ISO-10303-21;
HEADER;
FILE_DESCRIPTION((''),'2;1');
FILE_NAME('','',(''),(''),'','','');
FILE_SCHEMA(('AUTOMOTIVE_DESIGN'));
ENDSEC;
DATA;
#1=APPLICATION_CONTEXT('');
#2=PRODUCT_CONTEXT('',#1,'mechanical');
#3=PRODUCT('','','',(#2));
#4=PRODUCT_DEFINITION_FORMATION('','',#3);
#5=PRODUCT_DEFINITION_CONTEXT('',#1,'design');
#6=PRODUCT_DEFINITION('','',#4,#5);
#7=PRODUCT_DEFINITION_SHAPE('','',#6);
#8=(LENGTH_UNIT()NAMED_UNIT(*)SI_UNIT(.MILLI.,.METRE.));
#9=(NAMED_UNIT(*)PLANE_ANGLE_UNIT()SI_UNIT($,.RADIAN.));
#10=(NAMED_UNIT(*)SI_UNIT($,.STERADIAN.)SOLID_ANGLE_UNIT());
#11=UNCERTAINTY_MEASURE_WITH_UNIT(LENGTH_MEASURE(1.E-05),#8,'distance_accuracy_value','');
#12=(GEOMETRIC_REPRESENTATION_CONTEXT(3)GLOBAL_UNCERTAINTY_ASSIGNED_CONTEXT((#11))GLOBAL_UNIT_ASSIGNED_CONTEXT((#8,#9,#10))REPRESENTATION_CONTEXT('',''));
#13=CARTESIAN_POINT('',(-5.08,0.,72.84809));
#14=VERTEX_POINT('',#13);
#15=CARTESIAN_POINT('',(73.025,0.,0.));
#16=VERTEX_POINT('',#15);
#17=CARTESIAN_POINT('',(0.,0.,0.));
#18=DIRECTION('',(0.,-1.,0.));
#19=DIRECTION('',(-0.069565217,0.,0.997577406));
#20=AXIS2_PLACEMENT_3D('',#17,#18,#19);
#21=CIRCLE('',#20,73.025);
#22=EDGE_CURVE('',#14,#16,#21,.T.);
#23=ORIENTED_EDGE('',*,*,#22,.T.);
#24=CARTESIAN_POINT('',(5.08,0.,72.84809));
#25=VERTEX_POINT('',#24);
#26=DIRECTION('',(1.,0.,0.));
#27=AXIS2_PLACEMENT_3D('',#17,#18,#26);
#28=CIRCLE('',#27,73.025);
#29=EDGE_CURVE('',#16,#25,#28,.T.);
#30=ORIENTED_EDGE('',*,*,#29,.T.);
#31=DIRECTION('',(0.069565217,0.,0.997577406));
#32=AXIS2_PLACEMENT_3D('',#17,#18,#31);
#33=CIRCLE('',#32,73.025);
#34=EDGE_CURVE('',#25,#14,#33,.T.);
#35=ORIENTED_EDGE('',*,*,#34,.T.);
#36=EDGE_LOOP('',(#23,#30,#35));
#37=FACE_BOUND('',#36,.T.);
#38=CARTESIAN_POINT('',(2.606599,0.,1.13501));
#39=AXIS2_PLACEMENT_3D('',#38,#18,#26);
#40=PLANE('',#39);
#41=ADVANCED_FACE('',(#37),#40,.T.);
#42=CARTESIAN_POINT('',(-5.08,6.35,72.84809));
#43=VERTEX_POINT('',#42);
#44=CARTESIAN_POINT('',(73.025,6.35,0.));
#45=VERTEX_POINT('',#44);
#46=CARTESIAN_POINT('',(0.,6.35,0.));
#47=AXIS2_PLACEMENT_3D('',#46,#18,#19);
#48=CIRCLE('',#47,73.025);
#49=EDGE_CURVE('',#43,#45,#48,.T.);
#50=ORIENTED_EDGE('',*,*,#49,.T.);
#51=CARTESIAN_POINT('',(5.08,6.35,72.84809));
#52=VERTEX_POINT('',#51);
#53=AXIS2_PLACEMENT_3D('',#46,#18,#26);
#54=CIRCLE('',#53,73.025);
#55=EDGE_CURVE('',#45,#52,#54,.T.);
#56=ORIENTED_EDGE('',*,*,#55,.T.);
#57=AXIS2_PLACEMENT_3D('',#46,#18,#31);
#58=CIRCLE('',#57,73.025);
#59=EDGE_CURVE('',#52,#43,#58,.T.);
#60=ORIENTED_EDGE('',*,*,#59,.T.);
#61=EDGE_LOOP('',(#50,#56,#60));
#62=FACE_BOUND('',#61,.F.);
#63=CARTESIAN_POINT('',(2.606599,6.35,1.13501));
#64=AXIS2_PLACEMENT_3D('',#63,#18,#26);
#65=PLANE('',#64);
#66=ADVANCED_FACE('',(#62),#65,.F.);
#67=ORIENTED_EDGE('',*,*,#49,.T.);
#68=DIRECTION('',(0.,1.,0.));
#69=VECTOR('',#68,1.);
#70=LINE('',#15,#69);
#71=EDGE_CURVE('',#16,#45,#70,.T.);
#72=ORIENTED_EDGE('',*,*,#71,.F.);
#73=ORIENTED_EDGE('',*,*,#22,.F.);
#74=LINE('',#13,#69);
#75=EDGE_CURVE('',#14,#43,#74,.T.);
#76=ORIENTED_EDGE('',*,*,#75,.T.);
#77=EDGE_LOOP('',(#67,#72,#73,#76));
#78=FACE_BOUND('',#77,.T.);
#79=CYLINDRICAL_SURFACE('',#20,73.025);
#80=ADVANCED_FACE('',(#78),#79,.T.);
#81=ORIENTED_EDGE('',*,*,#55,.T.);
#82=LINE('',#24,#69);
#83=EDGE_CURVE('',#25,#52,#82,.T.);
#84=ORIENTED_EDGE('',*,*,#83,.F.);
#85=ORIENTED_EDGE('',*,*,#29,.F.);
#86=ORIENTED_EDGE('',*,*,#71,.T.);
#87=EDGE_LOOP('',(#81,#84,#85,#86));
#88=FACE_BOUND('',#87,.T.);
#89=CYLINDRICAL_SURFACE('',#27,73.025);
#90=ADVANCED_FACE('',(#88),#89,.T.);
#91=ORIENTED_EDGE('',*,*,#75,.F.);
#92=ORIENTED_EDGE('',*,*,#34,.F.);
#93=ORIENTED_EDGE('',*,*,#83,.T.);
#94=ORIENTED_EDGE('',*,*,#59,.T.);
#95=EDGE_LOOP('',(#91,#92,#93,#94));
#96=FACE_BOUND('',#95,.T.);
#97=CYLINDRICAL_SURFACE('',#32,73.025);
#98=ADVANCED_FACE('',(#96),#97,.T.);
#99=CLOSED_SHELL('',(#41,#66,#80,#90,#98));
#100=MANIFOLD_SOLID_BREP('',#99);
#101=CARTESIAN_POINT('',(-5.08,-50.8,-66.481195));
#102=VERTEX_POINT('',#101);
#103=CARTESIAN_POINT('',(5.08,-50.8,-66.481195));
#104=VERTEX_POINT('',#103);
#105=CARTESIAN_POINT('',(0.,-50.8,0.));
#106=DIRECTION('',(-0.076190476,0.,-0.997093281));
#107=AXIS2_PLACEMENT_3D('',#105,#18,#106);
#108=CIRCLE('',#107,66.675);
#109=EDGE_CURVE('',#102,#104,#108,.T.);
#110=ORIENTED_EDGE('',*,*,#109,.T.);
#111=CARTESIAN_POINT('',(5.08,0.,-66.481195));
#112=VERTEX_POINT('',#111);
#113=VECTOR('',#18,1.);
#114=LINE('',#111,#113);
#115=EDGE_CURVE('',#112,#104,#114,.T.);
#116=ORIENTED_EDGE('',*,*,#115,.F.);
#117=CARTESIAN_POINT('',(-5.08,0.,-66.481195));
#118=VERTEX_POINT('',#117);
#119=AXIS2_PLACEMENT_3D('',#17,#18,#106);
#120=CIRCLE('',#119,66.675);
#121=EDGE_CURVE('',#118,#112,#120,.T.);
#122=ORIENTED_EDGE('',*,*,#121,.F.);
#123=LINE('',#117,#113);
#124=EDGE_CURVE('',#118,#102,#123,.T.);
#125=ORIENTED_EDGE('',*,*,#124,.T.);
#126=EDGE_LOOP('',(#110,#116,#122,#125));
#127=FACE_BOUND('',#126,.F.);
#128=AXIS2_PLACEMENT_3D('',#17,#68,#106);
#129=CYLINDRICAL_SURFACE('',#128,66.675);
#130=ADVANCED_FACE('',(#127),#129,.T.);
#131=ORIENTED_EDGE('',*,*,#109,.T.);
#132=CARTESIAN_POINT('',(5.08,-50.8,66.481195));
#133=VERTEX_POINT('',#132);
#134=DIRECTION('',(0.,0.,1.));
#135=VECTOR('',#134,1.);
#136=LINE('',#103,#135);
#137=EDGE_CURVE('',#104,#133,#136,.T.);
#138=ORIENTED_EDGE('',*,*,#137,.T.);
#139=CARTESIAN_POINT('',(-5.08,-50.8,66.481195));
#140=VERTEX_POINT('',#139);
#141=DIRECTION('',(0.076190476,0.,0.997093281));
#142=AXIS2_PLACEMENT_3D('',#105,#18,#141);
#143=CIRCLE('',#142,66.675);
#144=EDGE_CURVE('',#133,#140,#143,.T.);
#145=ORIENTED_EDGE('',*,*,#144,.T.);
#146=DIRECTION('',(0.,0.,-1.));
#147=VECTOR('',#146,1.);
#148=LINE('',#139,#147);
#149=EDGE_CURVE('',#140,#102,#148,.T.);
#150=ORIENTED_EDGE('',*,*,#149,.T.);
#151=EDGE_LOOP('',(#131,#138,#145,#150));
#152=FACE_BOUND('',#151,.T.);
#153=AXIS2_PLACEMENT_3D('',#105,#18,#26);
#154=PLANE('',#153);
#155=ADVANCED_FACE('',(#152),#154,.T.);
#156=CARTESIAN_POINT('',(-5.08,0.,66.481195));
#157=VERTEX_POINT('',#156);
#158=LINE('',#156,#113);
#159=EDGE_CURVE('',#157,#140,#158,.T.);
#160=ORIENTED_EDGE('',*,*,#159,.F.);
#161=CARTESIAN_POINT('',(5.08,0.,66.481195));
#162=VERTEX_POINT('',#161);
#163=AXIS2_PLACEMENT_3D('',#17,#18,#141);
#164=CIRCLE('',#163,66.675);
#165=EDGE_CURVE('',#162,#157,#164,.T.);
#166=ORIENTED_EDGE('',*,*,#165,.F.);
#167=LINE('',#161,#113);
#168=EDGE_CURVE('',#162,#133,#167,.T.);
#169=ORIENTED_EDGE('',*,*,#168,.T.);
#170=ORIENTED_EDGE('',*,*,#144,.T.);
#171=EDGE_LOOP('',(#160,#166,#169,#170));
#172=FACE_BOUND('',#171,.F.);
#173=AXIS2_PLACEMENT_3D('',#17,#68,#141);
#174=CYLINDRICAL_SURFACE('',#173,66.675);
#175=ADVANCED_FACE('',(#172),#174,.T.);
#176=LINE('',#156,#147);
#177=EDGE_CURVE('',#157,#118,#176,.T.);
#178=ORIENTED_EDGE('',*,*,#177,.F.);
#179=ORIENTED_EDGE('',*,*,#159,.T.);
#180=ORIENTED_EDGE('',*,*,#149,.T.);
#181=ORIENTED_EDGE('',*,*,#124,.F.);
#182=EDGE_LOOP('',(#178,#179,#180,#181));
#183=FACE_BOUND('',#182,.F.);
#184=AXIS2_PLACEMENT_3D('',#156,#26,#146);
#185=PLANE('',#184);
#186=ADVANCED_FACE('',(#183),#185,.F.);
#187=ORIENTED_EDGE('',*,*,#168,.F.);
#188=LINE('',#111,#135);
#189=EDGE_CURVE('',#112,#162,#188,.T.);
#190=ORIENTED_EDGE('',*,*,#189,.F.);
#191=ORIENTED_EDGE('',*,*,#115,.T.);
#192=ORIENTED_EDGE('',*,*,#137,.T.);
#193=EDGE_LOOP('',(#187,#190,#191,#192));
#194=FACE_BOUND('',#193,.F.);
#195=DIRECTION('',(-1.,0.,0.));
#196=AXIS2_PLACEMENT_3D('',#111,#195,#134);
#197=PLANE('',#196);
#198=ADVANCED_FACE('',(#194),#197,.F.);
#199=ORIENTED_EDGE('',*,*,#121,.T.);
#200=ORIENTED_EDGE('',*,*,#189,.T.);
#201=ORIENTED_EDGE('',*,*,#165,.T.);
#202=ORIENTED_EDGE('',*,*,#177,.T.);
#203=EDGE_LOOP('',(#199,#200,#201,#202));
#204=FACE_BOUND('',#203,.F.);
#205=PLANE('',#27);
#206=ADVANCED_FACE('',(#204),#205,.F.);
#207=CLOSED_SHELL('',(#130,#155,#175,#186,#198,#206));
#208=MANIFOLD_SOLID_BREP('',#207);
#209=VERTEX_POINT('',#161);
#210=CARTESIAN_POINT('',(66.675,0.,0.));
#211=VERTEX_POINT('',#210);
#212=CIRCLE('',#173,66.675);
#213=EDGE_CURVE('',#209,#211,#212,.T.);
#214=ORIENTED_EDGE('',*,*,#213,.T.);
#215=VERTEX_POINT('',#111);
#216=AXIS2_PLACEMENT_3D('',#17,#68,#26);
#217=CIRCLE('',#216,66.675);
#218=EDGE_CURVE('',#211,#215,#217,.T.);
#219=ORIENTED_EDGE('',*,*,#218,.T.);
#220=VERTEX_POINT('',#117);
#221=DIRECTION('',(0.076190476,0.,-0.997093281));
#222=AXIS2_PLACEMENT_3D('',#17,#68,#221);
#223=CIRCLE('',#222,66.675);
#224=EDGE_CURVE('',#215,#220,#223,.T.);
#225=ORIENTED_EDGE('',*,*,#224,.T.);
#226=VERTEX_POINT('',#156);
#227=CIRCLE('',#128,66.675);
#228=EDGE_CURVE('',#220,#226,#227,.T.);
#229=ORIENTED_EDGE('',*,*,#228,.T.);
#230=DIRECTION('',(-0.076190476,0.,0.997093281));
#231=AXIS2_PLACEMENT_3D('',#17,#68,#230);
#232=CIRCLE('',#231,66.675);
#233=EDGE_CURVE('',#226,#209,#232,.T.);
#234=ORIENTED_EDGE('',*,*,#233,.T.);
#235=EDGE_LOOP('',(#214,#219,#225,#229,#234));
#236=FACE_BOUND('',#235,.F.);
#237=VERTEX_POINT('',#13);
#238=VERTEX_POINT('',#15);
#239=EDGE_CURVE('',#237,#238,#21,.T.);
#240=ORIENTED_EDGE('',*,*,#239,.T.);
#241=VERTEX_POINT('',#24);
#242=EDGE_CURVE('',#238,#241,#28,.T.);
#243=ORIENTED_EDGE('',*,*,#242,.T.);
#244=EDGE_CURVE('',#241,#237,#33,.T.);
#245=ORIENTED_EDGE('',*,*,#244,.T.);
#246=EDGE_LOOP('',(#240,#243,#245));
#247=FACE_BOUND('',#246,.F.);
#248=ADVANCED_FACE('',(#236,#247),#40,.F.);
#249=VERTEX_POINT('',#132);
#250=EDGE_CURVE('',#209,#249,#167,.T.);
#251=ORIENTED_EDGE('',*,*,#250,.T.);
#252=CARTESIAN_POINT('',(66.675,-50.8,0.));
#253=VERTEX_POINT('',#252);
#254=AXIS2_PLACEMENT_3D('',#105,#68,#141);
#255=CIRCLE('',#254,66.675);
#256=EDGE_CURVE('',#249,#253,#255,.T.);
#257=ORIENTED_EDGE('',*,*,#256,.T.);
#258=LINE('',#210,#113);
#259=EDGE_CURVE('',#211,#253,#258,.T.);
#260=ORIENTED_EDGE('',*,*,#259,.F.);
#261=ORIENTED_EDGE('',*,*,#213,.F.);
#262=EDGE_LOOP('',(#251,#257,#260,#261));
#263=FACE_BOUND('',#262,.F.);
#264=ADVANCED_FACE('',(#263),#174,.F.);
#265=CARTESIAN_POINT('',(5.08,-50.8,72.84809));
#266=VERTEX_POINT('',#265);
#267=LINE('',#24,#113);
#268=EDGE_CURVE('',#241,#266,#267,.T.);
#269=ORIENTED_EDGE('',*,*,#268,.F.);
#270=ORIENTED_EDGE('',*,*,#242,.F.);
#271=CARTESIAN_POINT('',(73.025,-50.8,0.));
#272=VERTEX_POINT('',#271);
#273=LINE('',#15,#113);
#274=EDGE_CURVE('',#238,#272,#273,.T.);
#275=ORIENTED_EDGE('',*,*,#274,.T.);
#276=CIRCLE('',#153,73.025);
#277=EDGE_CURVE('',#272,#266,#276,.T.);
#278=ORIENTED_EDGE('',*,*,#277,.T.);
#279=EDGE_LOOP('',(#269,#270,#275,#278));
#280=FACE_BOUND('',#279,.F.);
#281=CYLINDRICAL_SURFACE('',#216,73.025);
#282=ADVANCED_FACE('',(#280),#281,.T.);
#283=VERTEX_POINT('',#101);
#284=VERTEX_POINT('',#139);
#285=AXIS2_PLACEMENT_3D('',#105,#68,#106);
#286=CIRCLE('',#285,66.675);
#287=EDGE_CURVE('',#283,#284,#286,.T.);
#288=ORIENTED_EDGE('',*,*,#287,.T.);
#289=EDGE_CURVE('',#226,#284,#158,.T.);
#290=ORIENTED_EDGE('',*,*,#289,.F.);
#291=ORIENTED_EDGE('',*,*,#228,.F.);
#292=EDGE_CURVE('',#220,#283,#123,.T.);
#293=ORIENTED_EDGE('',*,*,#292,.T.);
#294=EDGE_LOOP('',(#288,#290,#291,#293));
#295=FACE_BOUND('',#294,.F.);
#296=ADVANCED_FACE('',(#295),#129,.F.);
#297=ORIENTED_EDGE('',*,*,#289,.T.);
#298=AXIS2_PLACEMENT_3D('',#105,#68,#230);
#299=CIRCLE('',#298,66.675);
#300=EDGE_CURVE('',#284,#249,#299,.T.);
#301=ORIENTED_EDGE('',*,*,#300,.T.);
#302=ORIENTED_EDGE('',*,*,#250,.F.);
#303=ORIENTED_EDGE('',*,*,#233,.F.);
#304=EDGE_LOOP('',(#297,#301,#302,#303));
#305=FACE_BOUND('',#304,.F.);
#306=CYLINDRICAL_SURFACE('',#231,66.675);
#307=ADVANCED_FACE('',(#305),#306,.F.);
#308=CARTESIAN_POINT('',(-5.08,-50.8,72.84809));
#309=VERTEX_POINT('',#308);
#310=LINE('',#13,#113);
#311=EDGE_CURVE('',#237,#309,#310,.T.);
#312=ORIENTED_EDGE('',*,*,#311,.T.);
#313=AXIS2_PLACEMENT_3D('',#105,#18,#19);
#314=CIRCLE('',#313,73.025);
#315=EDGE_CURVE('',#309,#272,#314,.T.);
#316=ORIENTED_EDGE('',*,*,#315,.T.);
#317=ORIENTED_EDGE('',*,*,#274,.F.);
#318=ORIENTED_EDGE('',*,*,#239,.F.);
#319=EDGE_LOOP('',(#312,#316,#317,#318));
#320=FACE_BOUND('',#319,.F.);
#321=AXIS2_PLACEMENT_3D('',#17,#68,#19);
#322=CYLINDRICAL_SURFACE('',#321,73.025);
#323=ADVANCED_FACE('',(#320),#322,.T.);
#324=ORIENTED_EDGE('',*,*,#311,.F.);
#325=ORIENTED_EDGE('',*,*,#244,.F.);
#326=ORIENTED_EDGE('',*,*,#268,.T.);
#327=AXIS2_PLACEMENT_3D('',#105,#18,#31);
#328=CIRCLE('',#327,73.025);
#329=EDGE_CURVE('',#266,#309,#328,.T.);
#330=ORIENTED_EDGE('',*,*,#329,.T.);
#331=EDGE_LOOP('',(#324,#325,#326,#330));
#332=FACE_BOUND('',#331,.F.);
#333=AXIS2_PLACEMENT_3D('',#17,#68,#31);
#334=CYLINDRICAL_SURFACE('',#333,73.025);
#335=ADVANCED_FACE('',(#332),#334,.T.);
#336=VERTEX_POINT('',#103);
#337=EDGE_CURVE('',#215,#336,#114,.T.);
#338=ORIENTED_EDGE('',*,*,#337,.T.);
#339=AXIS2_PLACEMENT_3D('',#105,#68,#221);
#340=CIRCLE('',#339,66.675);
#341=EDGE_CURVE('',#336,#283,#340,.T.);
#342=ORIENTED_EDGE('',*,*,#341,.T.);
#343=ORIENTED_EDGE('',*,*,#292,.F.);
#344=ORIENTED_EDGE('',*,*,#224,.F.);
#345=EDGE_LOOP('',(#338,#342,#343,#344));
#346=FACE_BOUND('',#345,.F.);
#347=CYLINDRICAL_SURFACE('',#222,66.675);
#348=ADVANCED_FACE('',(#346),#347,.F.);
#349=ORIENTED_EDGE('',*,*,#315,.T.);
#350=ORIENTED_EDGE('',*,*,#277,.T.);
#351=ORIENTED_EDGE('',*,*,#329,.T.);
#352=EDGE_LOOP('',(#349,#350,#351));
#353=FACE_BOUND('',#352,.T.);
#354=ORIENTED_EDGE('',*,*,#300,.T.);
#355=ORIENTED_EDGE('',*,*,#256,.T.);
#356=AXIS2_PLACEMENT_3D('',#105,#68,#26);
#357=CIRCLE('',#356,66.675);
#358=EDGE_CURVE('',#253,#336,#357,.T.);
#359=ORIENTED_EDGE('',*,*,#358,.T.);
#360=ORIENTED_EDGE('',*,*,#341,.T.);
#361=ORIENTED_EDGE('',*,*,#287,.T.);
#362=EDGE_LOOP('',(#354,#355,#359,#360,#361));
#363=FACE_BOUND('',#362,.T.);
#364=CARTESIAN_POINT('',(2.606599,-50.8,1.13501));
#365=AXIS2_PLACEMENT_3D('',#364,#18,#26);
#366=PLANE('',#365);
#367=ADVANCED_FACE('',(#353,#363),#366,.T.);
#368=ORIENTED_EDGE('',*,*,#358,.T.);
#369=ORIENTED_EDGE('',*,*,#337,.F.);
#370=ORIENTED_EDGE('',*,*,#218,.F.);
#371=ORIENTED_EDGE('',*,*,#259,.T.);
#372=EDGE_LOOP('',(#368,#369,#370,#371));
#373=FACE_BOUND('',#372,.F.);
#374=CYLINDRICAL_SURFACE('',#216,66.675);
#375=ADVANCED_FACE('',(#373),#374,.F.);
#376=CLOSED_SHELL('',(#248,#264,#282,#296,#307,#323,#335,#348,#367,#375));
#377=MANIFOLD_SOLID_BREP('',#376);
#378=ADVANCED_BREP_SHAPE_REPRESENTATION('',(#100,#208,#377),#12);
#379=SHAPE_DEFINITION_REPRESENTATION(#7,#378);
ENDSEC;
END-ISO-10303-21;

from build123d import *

# Parameters (mm, degrees)
F1_DEPTH = 6.35
F2_DEPTH = 50.8
F3_DEPTH = 50.8


with BuildPart() as f1:
    # F0 (on Front) → F1 (new body)
    with BuildSketch(Plane.XZ):
        with BuildLine():
            ThreePointArc((-5.08, 72.8480900573), (-49.8080496757, -53.4023296542), (73.025, 0))
            ThreePointArc((73.025, 0), (53.4023296542, 49.8080496757), (5.08, 72.8480900573))
            Line((5.08, 72.8480900573), (5.08, 66.4811945215))
            ThreePointArc((5.08, 66.4811945215), (48.909429689, 45.3147140838), (66.675, 0))
            ThreePointArc((66.675, 0), (48.909429689, -45.3147140838), (5.08, -66.4811945215))
            ThreePointArc((5.08, -66.4811945215), (0, -66.675), (-5.08, -66.4811945215))
            ThreePointArc((-5.08, -66.4811945215), (-66.675, 0), (-5.08, 66.4811945215))
            Line((-5.08, 66.4811945215), (-5.08, 72.8480900573))
        make_face()
        with BuildLine():
            Line((5.08, 66.4811945215), (5.08, 72.8480900573))
            ThreePointArc((5.08, 72.8480900573), (0, 73.025), (-5.08, 72.8480900573))
            Line((-5.08, 72.8480900573), (-5.08, 66.4811945215))
            ThreePointArc((-5.08, 66.4811945215), (0, 66.675), (5.08, 66.4811945215))
        make_face()
        with BuildLine():
            Line((5.08, -66.4811945215), (5.08, 66.4811945215))
            ThreePointArc((5.08, 66.4811945215), (0, 66.675), (-5.08, 66.4811945215))
            Line((-5.08, 66.4811945215), (-5.08, 0))
            Line((-5.08, 0), (-5.08, -66.4811945215))
            ThreePointArc((-5.08, -66.4811945215), (0, -66.675), (5.08, -66.4811945215))
        make_face()
        with BuildLine():
            ThreePointArc((66.675, 0), (48.909429689, 45.3147140838), (5.08, 66.4811945215))
            Line((5.08, 66.4811945215), (5.08, -66.4811945215))
            ThreePointArc((5.08, -66.4811945215), (48.909429689, -45.3147140838), (66.675, 0))
        make_face()
        with BuildLine():
            Line((-5.08, 0), (-5.08, 66.4811945215))
            ThreePointArc((-5.08, 66.4811945215), (-66.675, 0), (-5.08, -66.4811945215))
            Line((-5.08, -66.4811945215), (-5.08, 0))
        make_face()
    extrude(amount=-F1_DEPTH)


with BuildPart() as f2:
    # F0 (on Front) → F2 (new body)
    with BuildSketch(Plane.XZ):
        with BuildLine():
            ThreePointArc((-5.08, 72.8480900573), (-49.8080496757, -53.4023296542), (73.025, 0))
            ThreePointArc((73.025, 0), (53.4023296542, 49.8080496757), (5.08, 72.8480900573))
            Line((5.08, 72.8480900573), (5.08, 66.4811945215))
            ThreePointArc((5.08, 66.4811945215), (48.909429689, 45.3147140838), (66.675, 0))
            ThreePointArc((66.675, 0), (48.909429689, -45.3147140838), (5.08, -66.4811945215))
            ThreePointArc((5.08, -66.4811945215), (0, -66.675), (-5.08, -66.4811945215))
            ThreePointArc((-5.08, -66.4811945215), (-66.675, 0), (-5.08, 66.4811945215))
            Line((-5.08, 66.4811945215), (-5.08, 72.8480900573))
        make_face()
        with BuildLine():
            Line((5.08, 66.4811945215), (5.08, 72.8480900573))
            ThreePointArc((5.08, 72.8480900573), (0, 73.025), (-5.08, 72.8480900573))
            Line((-5.08, 72.8480900573), (-5.08, 66.4811945215))
            ThreePointArc((-5.08, 66.4811945215), (0, 66.675), (5.08, 66.4811945215))
        make_face()
    extrude(amount=F2_DEPTH)


with BuildPart() as f3:
    # F0 (on Front) → F3 (new body)
    with BuildSketch(Plane.XZ):
        with BuildLine():
            Line((5.08, -66.4811945215), (5.08, 66.4811945215))
            ThreePointArc((5.08, 66.4811945215), (0, 66.675), (-5.08, 66.4811945215))
            Line((-5.08, 66.4811945215), (-5.08, 0))
            Line((-5.08, 0), (-5.08, -66.4811945215))
            ThreePointArc((-5.08, -66.4811945215), (0, -66.675), (5.08, -66.4811945215))
        make_face()
    extrude(amount=F3_DEPTH)


solid = Compound([f1.part, f2.part, f3.part])
